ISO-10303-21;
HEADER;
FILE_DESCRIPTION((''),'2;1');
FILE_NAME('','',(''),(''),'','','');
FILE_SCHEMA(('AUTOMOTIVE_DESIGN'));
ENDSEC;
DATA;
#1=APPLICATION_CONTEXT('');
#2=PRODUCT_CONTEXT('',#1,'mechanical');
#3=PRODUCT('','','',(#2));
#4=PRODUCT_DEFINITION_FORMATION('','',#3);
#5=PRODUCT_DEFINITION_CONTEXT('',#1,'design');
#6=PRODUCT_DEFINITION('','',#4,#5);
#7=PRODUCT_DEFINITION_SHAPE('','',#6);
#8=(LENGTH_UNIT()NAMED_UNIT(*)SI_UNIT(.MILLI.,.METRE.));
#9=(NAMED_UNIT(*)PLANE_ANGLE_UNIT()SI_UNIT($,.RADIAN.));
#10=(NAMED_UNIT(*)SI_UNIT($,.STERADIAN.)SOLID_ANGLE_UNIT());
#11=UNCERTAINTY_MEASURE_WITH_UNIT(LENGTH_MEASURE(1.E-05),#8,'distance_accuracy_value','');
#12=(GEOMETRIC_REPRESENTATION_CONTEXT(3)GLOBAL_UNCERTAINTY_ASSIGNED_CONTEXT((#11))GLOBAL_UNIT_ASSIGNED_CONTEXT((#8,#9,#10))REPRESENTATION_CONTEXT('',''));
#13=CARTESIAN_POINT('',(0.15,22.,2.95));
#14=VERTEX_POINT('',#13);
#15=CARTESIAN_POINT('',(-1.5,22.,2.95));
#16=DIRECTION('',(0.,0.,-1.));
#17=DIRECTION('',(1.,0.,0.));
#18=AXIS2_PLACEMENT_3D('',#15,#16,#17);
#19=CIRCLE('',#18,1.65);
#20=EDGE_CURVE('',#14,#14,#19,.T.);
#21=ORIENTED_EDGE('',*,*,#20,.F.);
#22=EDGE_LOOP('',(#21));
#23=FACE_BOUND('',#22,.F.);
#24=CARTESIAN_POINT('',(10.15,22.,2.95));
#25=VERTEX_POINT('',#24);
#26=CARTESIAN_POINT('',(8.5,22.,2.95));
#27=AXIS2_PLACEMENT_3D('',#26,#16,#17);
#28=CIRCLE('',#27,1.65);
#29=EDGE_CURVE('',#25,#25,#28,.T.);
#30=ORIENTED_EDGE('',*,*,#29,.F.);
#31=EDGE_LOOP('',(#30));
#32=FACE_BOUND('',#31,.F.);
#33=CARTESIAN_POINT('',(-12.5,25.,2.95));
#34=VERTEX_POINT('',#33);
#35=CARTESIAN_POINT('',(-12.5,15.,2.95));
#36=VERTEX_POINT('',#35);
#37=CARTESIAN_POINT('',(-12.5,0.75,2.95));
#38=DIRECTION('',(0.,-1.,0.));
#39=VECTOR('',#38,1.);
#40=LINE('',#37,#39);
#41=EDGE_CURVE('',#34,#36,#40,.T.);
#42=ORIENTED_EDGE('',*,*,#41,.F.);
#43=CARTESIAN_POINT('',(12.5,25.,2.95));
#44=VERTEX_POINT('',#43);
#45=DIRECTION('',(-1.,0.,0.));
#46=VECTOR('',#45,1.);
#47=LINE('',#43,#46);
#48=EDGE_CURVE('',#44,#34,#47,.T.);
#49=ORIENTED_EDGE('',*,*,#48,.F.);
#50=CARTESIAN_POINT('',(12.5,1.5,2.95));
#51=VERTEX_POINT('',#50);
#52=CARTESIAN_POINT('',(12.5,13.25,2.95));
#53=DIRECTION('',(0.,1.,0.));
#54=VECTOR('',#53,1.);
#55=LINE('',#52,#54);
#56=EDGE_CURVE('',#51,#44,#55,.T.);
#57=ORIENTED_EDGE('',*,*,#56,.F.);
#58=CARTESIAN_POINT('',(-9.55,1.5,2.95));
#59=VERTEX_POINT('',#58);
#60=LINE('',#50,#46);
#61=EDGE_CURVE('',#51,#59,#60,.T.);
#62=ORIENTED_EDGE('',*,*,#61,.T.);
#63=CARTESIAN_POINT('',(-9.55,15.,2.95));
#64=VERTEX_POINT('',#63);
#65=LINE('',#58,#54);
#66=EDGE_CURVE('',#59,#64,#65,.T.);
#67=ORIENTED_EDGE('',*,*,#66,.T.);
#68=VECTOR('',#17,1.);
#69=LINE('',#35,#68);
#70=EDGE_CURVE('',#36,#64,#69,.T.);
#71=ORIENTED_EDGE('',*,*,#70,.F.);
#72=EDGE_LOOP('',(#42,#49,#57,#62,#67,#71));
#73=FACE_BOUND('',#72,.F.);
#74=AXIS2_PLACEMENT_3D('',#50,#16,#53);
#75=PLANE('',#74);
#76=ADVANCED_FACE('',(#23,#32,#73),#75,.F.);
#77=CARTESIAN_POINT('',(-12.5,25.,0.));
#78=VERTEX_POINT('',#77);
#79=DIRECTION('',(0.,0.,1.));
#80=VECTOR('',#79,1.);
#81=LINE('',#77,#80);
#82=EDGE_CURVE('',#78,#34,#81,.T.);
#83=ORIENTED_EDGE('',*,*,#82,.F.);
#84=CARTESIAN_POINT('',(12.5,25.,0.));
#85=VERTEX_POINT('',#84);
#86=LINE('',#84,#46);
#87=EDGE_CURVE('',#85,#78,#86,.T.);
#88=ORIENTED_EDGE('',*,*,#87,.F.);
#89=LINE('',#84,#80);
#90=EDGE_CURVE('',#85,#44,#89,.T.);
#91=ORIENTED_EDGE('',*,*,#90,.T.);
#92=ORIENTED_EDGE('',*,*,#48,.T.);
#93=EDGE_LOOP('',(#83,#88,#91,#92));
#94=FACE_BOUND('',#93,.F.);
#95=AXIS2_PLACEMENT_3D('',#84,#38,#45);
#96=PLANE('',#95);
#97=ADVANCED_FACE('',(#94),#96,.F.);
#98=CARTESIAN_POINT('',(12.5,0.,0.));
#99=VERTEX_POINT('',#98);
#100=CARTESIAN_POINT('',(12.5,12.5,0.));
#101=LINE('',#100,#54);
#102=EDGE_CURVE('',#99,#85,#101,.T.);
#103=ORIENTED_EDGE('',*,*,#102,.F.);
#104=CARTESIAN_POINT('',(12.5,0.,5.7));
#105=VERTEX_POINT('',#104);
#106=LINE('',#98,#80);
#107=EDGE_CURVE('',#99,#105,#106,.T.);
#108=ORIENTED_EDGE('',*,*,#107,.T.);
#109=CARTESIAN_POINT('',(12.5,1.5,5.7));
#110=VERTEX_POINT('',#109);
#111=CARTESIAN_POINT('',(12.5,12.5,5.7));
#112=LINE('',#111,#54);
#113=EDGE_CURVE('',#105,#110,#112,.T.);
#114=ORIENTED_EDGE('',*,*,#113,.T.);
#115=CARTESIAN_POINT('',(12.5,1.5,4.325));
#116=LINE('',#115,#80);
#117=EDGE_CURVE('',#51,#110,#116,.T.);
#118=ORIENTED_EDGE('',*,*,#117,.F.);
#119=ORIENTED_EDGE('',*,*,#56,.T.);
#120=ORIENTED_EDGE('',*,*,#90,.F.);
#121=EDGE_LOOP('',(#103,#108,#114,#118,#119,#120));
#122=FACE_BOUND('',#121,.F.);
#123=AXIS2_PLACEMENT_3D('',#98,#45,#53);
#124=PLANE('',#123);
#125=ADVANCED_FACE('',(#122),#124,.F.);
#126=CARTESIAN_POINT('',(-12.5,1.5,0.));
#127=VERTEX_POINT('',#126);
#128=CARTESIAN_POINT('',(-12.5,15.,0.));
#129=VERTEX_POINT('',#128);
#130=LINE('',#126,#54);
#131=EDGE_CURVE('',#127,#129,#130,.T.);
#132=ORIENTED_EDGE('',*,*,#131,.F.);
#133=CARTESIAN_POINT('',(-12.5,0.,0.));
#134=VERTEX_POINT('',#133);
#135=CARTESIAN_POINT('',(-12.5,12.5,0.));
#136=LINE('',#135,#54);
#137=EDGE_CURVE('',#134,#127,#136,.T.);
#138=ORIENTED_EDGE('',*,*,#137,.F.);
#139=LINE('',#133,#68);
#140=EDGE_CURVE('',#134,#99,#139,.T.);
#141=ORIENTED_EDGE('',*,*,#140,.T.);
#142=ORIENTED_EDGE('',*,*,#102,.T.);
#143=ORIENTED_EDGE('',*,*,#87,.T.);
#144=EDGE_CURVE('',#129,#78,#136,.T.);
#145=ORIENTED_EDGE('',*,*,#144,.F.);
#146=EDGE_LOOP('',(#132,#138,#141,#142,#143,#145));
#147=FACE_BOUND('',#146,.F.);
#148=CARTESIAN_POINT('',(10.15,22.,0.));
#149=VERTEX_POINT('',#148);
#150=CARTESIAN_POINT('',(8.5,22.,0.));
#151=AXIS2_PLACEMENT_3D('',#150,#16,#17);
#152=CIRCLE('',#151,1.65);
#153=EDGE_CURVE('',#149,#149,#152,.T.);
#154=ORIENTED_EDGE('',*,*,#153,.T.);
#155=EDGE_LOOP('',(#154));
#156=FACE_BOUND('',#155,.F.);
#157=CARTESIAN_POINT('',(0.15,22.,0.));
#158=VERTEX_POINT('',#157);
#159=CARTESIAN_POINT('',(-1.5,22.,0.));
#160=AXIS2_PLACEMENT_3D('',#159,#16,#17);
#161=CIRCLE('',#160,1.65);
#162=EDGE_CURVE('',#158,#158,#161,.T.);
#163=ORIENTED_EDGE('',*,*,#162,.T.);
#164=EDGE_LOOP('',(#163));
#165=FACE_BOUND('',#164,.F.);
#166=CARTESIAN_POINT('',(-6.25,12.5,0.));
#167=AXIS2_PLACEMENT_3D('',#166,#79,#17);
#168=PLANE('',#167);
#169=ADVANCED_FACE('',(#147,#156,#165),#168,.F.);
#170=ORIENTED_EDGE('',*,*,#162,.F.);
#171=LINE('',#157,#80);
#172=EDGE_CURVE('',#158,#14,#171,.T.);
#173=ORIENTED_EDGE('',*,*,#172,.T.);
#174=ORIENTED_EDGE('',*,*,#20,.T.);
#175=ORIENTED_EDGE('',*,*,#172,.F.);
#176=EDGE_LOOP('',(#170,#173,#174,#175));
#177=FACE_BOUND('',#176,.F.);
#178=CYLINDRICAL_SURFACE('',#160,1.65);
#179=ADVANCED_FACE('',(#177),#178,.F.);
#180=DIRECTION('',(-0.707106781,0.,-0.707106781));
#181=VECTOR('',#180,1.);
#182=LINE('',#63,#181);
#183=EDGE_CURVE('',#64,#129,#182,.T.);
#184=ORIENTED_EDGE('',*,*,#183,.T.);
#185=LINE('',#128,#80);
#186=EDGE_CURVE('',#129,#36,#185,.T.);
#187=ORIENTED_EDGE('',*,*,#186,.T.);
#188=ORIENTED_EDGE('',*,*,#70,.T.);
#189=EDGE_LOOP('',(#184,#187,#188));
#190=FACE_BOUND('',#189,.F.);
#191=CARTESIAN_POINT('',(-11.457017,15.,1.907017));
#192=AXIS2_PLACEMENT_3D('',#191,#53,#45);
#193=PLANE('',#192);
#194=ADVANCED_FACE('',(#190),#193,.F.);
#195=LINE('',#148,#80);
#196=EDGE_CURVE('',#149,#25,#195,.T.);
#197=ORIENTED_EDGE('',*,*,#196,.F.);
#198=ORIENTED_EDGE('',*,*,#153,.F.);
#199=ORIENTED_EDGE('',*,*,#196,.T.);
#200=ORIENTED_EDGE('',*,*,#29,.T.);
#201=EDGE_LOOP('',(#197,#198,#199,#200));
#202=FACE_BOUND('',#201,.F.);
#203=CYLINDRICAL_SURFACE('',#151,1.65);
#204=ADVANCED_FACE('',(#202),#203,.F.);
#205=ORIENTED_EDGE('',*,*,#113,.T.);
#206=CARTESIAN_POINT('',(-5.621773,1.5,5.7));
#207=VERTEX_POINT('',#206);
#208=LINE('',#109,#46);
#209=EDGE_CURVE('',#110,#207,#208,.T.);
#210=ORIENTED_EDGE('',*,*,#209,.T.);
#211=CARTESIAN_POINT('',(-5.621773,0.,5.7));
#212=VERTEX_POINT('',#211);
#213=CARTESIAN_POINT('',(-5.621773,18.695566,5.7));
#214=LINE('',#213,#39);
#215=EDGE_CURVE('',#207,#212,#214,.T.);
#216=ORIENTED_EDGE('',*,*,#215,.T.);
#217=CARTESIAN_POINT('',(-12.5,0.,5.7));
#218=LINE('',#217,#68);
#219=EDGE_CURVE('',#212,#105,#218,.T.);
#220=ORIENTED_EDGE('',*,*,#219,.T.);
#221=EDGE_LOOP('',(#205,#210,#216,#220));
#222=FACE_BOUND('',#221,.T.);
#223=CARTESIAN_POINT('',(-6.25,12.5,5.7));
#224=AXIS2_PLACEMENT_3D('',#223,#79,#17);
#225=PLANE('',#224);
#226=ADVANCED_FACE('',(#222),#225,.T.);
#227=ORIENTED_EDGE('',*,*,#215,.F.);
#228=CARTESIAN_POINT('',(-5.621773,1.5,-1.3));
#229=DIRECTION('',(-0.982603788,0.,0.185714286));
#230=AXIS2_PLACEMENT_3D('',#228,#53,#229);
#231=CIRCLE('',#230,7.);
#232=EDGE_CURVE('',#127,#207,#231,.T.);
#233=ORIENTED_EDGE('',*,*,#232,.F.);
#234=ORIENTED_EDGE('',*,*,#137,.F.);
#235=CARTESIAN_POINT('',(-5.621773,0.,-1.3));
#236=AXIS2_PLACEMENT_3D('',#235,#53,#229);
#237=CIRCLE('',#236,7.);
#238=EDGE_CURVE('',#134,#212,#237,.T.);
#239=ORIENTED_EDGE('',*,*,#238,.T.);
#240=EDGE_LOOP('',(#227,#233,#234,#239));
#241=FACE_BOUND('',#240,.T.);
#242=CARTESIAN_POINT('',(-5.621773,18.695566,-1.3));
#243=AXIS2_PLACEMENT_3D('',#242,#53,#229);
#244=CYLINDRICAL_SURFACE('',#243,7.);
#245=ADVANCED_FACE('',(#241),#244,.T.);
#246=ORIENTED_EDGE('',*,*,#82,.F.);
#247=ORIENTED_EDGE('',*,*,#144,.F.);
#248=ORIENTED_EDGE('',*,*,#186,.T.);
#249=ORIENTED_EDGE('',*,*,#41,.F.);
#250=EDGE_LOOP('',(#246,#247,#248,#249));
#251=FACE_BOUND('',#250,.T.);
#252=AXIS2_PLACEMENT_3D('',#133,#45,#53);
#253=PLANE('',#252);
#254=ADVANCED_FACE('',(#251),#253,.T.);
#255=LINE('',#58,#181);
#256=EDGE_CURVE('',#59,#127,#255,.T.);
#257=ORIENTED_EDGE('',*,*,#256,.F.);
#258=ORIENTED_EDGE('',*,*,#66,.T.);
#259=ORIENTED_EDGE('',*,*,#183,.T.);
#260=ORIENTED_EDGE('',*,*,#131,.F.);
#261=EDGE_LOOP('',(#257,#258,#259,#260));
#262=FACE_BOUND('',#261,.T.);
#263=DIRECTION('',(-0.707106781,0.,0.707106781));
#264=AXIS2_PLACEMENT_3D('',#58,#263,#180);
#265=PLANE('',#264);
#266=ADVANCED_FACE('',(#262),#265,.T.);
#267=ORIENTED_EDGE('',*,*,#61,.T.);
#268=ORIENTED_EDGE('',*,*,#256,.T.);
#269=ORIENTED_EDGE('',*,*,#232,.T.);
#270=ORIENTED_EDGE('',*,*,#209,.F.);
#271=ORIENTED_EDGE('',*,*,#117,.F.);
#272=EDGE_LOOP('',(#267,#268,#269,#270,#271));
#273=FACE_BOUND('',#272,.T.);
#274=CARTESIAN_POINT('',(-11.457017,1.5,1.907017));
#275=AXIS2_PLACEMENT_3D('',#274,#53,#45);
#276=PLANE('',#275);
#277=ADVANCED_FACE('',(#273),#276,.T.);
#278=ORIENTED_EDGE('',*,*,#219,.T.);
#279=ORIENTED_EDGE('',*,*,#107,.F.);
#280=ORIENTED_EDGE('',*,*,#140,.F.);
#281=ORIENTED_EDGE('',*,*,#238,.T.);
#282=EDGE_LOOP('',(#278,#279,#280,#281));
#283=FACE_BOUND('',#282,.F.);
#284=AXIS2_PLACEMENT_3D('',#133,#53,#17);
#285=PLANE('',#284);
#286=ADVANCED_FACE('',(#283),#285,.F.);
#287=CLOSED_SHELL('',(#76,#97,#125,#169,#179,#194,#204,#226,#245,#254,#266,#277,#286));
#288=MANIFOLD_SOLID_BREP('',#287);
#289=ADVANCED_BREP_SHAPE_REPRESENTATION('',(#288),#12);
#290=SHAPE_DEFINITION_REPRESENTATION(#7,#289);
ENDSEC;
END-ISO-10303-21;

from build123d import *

# Parameters (mm, degrees)
F0_W        = 12.5
F0_H        = 25
F1_DEPTH    = 5.7
F2_W        = 23.5
F2_H        = 2.75
F3_DEPTH    = 25.001
F5_DEPTH    = 13.5
F6_T4_DEPTH = 35.8911325781
F7_R        = 1.65
F8_DEPTH    = 5.701


# Not quite as in the source:
# - a fillet or chamfer that OpenCascade refuses, or shapes differently, is made with other operations: its cross-section is extruded or revolved along the edge and cut away or added


with BuildPart() as f1:
    # F0 (on Top) → F1 (new body)
    with BuildSketch(Plane.XY):
        with Locations((-6.25, 12.5)):
            Rectangle(F0_W, F0_H)
        with Locations((6.25, 12.5)):
            Rectangle(F0_W, F0_H)
    extrude(amount=F1_DEPTH)

    # F2 (on face) → F3 (cut, through all)
    with BuildSketch(Plane.YZ.offset(12.5)):
        with Locations((13.25, 4.325)):
            Rectangle(F2_W, F2_H)
    extrude(amount=-F3_DEPTH, mode=Mode.SUBTRACT)

    # F4 (on face) → F5 (cut)
    with BuildSketch(Plane(origin=(0, 1.5, 0), x_dir=(-1, 0, 0), z_dir=(0, 1, 0))):
        Polygon((9.55, 2.95), (12.5, 0), (12.5, 2.95), align=None)
    extrude(amount=F5_DEPTH, mode=Mode.SUBTRACT)

    # F6: fillet of radius 7 on 1 edges, made by hand


with BuildPart() as f6_tool2:
    # F6_s3 → F6_t4 (new body)
    with BuildSketch(Plane.XZ.offset(-18.695566289)):
        with BuildLine():
            ThreePointArc((-12.5, 0), (-10.0883157712, 4.0898051913), (-5.6217734844, 5.7))
            Line((-5.6217734844, 5.7), (-12.5, 5.7))
            Line((-12.5, 5.7), (-12.5, 0))
        make_face()
    extrude(amount=F6_T4_DEPTH)

    split(bisect_by=Plane.XZ.offset(-15), keep=Keep.TOP)


with BuildPart() as f1_1:
    add(f1.part)

    # F6_t1: cut F6_tool2
    add(f6_tool2.part, mode=Mode.SUBTRACT)

    # F7 (on face) → F8 (cut, through all)
    with BuildSketch(Plane(origin=(0, 0, 0), x_dir=(1, 0, 0), z_dir=(0, 0, -1))):
        with Locations((-1.5, -22)):
            Circle(F7_R)
        with Locations((8.5, -22)):
            Circle(F7_R)
    extrude(amount=-F8_DEPTH, mode=Mode.SUBTRACT)


solid = f1_1.part
